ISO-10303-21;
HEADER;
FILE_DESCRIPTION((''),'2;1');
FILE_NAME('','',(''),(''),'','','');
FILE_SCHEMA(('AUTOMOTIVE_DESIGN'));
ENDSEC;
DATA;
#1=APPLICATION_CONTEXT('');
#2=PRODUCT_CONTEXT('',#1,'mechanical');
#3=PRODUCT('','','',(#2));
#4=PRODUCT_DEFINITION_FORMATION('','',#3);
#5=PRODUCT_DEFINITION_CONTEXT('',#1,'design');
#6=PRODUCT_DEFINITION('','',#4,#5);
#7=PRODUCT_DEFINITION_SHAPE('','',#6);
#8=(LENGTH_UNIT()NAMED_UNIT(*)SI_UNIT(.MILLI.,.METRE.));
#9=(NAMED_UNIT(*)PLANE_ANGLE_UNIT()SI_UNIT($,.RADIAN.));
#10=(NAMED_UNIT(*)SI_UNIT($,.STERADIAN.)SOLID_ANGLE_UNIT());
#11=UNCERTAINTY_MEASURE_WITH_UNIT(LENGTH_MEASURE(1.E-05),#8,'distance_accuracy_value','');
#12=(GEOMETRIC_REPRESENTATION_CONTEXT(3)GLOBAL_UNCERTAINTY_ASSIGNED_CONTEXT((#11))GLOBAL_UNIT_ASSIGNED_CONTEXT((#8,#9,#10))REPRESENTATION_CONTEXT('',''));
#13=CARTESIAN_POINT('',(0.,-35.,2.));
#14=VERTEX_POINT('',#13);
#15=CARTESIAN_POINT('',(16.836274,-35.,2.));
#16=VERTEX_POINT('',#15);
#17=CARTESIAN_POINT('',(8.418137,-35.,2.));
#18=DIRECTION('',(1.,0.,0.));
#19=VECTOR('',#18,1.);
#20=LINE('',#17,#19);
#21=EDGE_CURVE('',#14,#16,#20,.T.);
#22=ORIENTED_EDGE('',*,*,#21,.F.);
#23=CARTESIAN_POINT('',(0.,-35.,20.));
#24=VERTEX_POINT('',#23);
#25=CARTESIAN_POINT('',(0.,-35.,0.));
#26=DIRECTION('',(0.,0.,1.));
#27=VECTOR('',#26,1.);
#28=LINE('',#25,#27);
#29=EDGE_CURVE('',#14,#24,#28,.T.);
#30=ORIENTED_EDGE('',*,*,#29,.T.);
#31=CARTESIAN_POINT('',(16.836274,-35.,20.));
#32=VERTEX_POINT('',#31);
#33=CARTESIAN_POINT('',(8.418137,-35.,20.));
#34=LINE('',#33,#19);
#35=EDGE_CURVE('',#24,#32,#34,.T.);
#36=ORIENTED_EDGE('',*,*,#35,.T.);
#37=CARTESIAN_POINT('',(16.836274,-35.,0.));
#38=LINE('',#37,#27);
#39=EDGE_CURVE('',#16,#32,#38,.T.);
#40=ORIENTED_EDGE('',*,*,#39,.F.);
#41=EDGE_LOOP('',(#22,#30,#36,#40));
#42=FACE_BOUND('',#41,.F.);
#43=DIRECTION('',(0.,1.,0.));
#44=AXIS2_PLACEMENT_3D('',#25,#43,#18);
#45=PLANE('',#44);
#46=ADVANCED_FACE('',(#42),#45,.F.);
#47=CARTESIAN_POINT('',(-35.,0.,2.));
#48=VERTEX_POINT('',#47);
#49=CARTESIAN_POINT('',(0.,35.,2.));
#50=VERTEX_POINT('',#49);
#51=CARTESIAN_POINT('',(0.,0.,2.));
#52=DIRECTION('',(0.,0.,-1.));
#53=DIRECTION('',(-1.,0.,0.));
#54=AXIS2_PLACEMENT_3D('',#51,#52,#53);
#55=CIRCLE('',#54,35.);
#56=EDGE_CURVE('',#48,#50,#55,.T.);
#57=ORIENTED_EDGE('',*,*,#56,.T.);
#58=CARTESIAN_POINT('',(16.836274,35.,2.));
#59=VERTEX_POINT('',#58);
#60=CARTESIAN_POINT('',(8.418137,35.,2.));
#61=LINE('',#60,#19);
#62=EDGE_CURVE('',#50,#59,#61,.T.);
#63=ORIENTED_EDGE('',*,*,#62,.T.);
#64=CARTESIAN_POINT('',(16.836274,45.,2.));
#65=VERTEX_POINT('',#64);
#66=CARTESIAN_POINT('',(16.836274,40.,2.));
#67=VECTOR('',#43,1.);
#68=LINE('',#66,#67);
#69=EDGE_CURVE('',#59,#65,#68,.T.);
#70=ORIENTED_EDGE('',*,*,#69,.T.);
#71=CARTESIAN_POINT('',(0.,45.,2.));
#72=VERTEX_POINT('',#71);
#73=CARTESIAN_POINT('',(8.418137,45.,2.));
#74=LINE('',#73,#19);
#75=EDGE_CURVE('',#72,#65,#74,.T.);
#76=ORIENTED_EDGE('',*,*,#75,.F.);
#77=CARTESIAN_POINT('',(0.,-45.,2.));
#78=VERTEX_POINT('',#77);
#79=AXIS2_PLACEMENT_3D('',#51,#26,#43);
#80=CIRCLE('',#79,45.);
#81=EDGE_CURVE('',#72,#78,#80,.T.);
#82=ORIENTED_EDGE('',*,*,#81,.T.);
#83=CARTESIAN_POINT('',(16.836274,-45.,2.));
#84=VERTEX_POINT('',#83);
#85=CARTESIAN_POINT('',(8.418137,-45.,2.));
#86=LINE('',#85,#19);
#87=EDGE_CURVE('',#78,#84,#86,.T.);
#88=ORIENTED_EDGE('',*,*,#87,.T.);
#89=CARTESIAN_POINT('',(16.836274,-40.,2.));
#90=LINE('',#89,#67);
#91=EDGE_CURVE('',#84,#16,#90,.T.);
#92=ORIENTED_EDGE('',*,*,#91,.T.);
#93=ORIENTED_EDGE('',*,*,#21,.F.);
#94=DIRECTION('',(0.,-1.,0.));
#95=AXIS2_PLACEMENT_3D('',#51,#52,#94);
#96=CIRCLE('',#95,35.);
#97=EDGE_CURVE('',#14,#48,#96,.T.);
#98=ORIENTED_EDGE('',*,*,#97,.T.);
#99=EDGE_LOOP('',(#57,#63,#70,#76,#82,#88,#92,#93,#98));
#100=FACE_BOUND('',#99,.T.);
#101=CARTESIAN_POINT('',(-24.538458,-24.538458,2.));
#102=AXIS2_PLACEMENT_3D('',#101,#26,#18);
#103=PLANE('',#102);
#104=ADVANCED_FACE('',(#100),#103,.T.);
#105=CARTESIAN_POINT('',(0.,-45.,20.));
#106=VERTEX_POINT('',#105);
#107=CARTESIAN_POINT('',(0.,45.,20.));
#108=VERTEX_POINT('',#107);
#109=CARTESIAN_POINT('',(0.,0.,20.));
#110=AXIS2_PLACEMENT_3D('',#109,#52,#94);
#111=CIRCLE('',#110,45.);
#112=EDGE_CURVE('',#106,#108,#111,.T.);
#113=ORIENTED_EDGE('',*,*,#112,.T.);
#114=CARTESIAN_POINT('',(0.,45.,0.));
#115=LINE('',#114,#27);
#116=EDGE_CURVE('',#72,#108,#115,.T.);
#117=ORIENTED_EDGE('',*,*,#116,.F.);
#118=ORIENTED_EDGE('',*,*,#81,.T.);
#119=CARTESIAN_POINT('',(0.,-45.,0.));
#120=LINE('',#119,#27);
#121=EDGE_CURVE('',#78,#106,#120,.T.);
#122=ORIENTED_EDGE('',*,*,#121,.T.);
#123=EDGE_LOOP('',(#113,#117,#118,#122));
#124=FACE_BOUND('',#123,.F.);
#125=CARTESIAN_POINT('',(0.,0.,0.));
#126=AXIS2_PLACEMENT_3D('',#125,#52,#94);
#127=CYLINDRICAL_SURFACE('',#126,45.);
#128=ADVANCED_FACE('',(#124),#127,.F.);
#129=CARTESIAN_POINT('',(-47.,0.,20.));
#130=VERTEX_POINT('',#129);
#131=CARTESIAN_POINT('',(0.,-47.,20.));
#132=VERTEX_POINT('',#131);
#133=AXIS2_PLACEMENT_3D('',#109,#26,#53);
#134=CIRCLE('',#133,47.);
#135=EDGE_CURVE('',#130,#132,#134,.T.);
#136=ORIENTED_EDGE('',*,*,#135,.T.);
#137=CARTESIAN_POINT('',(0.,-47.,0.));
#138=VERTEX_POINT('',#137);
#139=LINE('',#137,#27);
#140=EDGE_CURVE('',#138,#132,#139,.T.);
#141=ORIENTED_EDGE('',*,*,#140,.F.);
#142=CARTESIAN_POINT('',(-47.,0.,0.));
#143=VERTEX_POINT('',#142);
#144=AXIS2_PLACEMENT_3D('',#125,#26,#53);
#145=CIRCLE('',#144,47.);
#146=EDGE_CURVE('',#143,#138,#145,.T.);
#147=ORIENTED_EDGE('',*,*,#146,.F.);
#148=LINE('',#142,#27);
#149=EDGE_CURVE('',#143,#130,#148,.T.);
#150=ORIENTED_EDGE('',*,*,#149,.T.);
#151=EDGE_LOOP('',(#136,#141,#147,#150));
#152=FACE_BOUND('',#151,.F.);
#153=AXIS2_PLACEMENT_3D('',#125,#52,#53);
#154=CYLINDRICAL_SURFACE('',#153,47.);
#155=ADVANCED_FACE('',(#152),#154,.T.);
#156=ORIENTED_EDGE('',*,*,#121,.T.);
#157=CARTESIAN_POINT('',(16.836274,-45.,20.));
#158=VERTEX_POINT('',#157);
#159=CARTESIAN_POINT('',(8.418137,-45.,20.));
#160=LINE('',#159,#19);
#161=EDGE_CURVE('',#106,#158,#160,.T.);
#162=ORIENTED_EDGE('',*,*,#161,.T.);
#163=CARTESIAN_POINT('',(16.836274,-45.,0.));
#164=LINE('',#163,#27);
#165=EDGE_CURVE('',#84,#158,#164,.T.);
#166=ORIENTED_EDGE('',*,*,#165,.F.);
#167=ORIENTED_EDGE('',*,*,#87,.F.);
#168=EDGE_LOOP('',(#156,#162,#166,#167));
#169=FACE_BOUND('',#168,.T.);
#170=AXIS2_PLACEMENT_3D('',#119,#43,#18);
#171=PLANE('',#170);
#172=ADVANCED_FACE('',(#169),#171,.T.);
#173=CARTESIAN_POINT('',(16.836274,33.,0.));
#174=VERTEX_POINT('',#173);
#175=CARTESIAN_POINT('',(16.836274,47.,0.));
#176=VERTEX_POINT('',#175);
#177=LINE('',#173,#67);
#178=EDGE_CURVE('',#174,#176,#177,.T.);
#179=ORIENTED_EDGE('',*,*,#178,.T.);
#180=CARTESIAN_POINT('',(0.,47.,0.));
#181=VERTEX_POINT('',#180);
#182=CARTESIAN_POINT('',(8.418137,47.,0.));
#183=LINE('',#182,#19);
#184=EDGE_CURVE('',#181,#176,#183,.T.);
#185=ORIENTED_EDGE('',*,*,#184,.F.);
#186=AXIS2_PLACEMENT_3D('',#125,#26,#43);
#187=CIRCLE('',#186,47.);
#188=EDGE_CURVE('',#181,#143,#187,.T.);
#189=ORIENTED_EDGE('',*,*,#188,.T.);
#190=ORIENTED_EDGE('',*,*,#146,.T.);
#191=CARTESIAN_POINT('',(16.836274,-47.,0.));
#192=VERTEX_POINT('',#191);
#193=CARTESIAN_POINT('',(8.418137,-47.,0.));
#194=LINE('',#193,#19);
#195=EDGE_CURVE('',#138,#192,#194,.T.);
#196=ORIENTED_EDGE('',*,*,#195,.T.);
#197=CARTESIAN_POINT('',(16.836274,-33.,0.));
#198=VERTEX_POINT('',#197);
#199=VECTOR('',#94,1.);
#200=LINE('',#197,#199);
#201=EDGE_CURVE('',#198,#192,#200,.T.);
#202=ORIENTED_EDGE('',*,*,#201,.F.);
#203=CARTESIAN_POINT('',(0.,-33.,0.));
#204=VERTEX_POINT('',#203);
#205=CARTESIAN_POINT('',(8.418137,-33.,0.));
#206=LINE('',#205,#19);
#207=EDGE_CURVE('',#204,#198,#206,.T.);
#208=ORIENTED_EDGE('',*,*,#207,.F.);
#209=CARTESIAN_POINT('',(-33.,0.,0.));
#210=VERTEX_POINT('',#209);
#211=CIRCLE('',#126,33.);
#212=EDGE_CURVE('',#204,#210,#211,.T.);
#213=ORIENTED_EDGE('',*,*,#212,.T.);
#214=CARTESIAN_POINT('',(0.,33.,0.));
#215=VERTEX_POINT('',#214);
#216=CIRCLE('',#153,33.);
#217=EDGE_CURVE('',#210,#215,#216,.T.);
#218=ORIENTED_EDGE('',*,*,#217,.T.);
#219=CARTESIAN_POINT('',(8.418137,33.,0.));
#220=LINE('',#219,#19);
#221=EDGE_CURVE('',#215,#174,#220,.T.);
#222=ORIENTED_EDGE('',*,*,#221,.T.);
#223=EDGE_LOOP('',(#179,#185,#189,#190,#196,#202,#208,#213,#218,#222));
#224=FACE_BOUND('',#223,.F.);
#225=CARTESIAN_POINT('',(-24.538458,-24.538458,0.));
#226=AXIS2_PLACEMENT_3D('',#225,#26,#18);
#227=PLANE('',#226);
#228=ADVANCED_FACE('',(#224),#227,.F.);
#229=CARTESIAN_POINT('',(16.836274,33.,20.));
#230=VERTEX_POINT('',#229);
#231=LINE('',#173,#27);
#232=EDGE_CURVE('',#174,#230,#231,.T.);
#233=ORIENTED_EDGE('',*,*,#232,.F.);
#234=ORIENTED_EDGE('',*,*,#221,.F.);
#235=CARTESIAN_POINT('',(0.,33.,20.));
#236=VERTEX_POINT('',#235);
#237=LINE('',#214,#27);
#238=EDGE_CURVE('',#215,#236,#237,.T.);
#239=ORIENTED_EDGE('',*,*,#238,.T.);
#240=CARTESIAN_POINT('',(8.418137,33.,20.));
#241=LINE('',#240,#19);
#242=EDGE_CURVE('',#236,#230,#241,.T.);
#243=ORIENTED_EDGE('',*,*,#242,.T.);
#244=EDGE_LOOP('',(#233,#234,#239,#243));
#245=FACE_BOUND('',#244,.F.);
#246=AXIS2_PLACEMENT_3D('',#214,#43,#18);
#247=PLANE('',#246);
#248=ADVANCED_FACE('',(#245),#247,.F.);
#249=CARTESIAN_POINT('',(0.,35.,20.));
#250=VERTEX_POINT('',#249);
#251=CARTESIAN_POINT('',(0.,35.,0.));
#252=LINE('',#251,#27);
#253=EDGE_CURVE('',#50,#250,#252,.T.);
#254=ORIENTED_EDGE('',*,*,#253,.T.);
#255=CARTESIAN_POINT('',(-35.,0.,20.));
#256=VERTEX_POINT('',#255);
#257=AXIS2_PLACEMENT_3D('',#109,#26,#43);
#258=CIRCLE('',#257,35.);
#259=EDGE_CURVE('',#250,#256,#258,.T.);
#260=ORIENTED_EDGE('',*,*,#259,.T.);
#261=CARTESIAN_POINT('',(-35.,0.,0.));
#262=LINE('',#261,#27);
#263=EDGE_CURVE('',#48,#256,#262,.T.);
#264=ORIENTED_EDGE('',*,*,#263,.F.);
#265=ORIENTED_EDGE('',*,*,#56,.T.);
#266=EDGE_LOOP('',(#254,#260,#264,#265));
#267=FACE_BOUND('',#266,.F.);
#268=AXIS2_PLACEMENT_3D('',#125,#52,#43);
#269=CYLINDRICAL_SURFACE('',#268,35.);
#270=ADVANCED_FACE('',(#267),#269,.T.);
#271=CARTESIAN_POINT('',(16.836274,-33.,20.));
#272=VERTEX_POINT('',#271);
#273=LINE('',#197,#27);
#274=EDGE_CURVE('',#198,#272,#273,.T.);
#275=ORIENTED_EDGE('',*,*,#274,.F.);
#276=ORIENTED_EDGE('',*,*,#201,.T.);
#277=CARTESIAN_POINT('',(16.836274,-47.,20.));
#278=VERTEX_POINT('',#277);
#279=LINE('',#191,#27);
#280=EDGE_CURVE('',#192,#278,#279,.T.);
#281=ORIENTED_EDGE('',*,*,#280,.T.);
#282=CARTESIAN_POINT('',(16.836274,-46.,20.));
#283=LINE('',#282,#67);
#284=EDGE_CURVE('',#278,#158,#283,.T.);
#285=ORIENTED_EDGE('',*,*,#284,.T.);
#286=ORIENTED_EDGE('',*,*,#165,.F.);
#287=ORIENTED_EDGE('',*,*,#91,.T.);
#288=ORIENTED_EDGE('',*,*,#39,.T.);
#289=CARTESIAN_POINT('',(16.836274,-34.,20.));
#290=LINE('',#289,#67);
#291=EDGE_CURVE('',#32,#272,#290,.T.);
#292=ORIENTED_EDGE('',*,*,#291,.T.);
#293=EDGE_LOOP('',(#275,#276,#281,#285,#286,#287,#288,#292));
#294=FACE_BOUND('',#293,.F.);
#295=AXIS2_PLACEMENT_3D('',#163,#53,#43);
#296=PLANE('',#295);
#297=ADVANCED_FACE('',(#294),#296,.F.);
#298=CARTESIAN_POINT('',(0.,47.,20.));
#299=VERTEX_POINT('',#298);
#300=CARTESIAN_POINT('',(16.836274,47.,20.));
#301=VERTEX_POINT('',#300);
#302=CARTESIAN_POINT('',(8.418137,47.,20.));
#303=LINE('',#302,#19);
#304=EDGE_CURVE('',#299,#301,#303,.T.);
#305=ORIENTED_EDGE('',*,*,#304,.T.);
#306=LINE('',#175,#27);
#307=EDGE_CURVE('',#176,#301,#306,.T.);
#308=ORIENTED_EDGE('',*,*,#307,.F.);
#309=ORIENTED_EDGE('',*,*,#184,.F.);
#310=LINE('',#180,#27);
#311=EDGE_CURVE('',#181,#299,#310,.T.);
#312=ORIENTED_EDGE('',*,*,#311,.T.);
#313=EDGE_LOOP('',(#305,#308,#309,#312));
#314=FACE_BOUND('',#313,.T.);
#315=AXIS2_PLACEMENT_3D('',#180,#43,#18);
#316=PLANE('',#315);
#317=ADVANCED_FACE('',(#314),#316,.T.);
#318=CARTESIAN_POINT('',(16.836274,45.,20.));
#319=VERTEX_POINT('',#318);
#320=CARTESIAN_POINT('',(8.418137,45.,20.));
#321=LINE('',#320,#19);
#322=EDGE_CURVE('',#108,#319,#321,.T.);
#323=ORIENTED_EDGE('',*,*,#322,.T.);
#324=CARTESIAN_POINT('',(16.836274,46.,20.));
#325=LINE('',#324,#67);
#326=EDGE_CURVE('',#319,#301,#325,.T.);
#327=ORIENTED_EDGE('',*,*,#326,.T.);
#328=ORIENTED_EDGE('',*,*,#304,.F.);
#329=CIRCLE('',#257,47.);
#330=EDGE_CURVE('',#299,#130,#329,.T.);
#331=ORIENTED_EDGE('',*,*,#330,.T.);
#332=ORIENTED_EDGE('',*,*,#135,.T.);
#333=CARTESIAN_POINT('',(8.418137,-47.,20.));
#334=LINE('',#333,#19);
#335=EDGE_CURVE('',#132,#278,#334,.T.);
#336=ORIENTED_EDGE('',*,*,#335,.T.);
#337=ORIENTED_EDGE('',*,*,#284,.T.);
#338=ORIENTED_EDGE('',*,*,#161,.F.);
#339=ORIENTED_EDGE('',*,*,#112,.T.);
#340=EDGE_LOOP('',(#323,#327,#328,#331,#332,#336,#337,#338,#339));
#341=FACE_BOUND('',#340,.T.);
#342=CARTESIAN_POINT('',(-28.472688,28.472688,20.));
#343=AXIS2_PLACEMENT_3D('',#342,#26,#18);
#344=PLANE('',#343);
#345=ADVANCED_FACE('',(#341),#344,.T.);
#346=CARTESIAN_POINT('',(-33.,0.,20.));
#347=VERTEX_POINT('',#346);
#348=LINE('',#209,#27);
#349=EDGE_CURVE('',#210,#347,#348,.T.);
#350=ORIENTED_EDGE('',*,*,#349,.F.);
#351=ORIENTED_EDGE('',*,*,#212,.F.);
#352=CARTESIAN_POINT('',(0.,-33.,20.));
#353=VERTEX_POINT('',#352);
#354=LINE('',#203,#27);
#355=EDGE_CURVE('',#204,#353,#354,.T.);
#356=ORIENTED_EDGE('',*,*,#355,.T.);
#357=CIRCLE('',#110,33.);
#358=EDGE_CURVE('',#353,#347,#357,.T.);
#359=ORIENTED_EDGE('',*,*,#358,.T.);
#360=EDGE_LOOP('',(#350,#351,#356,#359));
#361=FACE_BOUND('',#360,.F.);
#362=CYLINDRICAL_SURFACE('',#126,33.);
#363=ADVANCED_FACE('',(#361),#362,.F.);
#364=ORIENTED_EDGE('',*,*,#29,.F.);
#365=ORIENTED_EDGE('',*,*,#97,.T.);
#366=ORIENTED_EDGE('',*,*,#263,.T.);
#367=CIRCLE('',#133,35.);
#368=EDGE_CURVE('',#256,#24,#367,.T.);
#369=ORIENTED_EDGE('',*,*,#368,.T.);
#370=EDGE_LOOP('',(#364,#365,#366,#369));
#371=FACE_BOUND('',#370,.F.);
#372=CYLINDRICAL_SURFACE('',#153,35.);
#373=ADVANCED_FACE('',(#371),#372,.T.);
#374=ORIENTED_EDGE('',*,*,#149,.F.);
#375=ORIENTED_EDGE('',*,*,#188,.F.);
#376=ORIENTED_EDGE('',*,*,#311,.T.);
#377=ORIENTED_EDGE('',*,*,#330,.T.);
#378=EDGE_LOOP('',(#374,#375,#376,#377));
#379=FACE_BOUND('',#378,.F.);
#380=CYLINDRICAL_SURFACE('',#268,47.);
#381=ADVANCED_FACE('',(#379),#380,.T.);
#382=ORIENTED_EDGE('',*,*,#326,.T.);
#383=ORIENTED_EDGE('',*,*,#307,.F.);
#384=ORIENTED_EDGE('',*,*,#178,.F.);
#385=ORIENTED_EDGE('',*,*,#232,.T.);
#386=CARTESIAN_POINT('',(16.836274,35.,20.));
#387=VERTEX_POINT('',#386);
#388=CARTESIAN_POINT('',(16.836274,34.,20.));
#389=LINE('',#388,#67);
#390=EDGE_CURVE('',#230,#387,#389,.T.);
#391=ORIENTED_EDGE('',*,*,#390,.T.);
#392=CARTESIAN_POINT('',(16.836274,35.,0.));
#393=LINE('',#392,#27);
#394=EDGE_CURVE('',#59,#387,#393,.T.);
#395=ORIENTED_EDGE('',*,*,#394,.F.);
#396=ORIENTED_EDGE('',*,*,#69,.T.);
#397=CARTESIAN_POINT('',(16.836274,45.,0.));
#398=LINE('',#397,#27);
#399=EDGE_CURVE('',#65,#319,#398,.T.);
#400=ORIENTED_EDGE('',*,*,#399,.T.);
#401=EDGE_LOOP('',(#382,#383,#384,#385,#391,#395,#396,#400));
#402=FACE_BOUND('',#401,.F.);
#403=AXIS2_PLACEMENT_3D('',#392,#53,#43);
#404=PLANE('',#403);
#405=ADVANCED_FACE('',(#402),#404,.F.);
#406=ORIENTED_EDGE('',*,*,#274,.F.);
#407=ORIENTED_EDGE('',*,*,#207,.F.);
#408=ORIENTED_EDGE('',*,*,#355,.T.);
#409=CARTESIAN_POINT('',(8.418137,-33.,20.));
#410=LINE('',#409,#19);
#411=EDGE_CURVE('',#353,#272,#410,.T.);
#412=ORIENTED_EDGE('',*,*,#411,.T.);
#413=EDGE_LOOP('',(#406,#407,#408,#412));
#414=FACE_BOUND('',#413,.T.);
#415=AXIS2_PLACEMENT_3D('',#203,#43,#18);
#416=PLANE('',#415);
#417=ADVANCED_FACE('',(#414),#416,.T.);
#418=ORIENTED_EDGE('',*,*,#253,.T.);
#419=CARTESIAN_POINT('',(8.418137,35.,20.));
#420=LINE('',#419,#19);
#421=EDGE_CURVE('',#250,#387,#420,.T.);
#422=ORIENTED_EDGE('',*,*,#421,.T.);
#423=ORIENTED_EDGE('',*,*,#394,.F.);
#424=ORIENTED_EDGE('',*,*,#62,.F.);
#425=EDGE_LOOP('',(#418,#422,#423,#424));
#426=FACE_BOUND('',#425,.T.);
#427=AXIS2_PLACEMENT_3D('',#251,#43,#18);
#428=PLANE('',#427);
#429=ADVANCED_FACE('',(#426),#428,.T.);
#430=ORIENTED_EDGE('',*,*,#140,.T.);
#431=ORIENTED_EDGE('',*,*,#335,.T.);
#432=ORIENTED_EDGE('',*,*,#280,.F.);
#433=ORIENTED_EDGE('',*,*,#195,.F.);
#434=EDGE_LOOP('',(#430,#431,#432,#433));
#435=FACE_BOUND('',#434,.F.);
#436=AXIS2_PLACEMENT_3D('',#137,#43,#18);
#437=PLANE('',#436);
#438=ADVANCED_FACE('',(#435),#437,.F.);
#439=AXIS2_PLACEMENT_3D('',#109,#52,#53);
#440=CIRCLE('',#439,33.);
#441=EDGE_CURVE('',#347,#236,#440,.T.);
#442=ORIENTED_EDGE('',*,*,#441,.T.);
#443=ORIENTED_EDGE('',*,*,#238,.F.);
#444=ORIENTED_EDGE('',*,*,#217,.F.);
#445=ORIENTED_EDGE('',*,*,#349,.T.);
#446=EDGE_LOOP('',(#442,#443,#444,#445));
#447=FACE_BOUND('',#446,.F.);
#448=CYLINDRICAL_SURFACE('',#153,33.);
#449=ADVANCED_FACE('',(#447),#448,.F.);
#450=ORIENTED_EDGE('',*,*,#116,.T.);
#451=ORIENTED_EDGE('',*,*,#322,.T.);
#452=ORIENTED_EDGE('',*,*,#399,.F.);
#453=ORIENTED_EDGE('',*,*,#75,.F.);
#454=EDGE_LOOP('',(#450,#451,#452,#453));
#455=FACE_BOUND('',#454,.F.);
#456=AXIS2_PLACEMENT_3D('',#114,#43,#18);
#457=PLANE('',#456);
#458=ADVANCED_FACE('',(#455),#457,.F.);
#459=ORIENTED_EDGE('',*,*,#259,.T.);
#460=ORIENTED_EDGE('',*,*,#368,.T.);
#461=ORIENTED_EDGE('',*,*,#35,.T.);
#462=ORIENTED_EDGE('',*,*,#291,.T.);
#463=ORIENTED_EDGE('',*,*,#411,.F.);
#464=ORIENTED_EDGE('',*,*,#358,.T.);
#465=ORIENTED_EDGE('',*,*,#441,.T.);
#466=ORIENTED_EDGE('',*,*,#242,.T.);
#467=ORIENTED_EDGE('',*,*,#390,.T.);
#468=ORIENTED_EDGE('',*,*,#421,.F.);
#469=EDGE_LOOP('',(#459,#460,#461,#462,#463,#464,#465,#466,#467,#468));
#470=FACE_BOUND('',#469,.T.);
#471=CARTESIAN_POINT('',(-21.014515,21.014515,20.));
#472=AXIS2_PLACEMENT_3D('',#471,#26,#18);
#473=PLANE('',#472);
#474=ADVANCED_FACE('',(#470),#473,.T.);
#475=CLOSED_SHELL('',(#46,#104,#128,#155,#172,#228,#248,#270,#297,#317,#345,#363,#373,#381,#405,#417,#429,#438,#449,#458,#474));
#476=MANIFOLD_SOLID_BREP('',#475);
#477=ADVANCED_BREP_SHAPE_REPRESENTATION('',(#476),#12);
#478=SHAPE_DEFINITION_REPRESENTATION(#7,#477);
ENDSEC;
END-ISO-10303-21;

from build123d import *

# Parameters (mm, degrees)
F0_W     = 16.8362744153
F0_H     = 2
F1_DEPTH = 20
F0_H_2   = 10
F2_DEPTH = 2


with BuildPart() as f1:
    # F0 (on Top) → F1 (new body)
    with BuildSketch(Plane.XY):
        with BuildLine():
            Line((0, 33), (0, 35))
            ThreePointArc((0, 35), (-24.7487373415, 24.7487373415), (-35, 0))
            Line((-35, 0), (-33, 0))
            ThreePointArc((-33, 0), (-23.3345237792, 23.3345237792), (0, 33))
        make_face()
        with Locations((8.4181372076, 34)):
            Rectangle(F0_W, F0_H)
        with BuildLine():
            Line((-33, 0), (-35, 0))
            ThreePointArc((-35, 0), (-24.7487373415, -24.7487373415), (0, -35))
            Line((0, -35), (0, -33))
            ThreePointArc((0, -33), (-23.3345237792, -23.3345237792), (-33, 0))
        make_face()
        with Locations((8.4181372076, -34)):
            Rectangle(F0_W, F0_H)
    extrude(amount=F1_DEPTH)



with BuildPart() as f1b:
    # F0 (on Top) → F1, piece 2 (new body)
    with BuildSketch(Plane.XY):
        with BuildLine():
            ThreePointArc((-45, 0), (-31.8198051534, 31.8198051534), (0, 45))
            Line((0, 45), (0, 47))
            ThreePointArc((0, 47), (-33.2340187158, 33.2340187158), (-47, 0))
            Line((-47, 0), (-45, 0))
        make_face()
        with Locations((8.4181372076, 46)):
            Rectangle(F0_W, F0_H)
        with BuildLine():
            ThreePointArc((0, -45), (-31.8198051534, -31.8198051534), (-45, 0))
            Line((-45, 0), (-47, 0))
            ThreePointArc((-47, 0), (-33.2340187158, -33.2340187158), (0, -47))
            Line((0, -47), (0, -45))
        make_face()
        with Locations((8.4181372076, -46)):
            Rectangle(F0_W, F0_H)
    extrude(amount=F1_DEPTH)


with BuildPart() as f1_1:
    add(f1.part)

    add(f1b.part)  # F2 merges F1b
    # F0 (on Top) → F2 (join)
    with BuildSketch(Plane.XY):
        with BuildLine():
            ThreePointArc((0, -35), (-24.7487373415, -24.7487373415), (-35, 0))
            Line((-35, 0), (-45, 0))
            ThreePointArc((-45, 0), (-31.8198051534, -31.8198051534), (0, -45))
            Line((0, -45), (0, -35))
        make_face()
        with BuildLine():
            ThreePointArc((-35, 0), (-24.7487373415, 24.7487373415), (0, 35))
            Line((0, 35), (0, 45))
            ThreePointArc((0, 45), (-31.8198051534, 31.8198051534), (-45, 0))
            Line((-45, 0), (-35, 0))
        make_face()
        with Locations((8.4181372076, 40)):
            Rectangle(F0_W, F0_H_2)
        with Locations((8.4181372076, -40)):
            Rectangle(F0_W, F0_H_2)
    extrude(amount=F2_DEPTH)


solid = f1_1.part
